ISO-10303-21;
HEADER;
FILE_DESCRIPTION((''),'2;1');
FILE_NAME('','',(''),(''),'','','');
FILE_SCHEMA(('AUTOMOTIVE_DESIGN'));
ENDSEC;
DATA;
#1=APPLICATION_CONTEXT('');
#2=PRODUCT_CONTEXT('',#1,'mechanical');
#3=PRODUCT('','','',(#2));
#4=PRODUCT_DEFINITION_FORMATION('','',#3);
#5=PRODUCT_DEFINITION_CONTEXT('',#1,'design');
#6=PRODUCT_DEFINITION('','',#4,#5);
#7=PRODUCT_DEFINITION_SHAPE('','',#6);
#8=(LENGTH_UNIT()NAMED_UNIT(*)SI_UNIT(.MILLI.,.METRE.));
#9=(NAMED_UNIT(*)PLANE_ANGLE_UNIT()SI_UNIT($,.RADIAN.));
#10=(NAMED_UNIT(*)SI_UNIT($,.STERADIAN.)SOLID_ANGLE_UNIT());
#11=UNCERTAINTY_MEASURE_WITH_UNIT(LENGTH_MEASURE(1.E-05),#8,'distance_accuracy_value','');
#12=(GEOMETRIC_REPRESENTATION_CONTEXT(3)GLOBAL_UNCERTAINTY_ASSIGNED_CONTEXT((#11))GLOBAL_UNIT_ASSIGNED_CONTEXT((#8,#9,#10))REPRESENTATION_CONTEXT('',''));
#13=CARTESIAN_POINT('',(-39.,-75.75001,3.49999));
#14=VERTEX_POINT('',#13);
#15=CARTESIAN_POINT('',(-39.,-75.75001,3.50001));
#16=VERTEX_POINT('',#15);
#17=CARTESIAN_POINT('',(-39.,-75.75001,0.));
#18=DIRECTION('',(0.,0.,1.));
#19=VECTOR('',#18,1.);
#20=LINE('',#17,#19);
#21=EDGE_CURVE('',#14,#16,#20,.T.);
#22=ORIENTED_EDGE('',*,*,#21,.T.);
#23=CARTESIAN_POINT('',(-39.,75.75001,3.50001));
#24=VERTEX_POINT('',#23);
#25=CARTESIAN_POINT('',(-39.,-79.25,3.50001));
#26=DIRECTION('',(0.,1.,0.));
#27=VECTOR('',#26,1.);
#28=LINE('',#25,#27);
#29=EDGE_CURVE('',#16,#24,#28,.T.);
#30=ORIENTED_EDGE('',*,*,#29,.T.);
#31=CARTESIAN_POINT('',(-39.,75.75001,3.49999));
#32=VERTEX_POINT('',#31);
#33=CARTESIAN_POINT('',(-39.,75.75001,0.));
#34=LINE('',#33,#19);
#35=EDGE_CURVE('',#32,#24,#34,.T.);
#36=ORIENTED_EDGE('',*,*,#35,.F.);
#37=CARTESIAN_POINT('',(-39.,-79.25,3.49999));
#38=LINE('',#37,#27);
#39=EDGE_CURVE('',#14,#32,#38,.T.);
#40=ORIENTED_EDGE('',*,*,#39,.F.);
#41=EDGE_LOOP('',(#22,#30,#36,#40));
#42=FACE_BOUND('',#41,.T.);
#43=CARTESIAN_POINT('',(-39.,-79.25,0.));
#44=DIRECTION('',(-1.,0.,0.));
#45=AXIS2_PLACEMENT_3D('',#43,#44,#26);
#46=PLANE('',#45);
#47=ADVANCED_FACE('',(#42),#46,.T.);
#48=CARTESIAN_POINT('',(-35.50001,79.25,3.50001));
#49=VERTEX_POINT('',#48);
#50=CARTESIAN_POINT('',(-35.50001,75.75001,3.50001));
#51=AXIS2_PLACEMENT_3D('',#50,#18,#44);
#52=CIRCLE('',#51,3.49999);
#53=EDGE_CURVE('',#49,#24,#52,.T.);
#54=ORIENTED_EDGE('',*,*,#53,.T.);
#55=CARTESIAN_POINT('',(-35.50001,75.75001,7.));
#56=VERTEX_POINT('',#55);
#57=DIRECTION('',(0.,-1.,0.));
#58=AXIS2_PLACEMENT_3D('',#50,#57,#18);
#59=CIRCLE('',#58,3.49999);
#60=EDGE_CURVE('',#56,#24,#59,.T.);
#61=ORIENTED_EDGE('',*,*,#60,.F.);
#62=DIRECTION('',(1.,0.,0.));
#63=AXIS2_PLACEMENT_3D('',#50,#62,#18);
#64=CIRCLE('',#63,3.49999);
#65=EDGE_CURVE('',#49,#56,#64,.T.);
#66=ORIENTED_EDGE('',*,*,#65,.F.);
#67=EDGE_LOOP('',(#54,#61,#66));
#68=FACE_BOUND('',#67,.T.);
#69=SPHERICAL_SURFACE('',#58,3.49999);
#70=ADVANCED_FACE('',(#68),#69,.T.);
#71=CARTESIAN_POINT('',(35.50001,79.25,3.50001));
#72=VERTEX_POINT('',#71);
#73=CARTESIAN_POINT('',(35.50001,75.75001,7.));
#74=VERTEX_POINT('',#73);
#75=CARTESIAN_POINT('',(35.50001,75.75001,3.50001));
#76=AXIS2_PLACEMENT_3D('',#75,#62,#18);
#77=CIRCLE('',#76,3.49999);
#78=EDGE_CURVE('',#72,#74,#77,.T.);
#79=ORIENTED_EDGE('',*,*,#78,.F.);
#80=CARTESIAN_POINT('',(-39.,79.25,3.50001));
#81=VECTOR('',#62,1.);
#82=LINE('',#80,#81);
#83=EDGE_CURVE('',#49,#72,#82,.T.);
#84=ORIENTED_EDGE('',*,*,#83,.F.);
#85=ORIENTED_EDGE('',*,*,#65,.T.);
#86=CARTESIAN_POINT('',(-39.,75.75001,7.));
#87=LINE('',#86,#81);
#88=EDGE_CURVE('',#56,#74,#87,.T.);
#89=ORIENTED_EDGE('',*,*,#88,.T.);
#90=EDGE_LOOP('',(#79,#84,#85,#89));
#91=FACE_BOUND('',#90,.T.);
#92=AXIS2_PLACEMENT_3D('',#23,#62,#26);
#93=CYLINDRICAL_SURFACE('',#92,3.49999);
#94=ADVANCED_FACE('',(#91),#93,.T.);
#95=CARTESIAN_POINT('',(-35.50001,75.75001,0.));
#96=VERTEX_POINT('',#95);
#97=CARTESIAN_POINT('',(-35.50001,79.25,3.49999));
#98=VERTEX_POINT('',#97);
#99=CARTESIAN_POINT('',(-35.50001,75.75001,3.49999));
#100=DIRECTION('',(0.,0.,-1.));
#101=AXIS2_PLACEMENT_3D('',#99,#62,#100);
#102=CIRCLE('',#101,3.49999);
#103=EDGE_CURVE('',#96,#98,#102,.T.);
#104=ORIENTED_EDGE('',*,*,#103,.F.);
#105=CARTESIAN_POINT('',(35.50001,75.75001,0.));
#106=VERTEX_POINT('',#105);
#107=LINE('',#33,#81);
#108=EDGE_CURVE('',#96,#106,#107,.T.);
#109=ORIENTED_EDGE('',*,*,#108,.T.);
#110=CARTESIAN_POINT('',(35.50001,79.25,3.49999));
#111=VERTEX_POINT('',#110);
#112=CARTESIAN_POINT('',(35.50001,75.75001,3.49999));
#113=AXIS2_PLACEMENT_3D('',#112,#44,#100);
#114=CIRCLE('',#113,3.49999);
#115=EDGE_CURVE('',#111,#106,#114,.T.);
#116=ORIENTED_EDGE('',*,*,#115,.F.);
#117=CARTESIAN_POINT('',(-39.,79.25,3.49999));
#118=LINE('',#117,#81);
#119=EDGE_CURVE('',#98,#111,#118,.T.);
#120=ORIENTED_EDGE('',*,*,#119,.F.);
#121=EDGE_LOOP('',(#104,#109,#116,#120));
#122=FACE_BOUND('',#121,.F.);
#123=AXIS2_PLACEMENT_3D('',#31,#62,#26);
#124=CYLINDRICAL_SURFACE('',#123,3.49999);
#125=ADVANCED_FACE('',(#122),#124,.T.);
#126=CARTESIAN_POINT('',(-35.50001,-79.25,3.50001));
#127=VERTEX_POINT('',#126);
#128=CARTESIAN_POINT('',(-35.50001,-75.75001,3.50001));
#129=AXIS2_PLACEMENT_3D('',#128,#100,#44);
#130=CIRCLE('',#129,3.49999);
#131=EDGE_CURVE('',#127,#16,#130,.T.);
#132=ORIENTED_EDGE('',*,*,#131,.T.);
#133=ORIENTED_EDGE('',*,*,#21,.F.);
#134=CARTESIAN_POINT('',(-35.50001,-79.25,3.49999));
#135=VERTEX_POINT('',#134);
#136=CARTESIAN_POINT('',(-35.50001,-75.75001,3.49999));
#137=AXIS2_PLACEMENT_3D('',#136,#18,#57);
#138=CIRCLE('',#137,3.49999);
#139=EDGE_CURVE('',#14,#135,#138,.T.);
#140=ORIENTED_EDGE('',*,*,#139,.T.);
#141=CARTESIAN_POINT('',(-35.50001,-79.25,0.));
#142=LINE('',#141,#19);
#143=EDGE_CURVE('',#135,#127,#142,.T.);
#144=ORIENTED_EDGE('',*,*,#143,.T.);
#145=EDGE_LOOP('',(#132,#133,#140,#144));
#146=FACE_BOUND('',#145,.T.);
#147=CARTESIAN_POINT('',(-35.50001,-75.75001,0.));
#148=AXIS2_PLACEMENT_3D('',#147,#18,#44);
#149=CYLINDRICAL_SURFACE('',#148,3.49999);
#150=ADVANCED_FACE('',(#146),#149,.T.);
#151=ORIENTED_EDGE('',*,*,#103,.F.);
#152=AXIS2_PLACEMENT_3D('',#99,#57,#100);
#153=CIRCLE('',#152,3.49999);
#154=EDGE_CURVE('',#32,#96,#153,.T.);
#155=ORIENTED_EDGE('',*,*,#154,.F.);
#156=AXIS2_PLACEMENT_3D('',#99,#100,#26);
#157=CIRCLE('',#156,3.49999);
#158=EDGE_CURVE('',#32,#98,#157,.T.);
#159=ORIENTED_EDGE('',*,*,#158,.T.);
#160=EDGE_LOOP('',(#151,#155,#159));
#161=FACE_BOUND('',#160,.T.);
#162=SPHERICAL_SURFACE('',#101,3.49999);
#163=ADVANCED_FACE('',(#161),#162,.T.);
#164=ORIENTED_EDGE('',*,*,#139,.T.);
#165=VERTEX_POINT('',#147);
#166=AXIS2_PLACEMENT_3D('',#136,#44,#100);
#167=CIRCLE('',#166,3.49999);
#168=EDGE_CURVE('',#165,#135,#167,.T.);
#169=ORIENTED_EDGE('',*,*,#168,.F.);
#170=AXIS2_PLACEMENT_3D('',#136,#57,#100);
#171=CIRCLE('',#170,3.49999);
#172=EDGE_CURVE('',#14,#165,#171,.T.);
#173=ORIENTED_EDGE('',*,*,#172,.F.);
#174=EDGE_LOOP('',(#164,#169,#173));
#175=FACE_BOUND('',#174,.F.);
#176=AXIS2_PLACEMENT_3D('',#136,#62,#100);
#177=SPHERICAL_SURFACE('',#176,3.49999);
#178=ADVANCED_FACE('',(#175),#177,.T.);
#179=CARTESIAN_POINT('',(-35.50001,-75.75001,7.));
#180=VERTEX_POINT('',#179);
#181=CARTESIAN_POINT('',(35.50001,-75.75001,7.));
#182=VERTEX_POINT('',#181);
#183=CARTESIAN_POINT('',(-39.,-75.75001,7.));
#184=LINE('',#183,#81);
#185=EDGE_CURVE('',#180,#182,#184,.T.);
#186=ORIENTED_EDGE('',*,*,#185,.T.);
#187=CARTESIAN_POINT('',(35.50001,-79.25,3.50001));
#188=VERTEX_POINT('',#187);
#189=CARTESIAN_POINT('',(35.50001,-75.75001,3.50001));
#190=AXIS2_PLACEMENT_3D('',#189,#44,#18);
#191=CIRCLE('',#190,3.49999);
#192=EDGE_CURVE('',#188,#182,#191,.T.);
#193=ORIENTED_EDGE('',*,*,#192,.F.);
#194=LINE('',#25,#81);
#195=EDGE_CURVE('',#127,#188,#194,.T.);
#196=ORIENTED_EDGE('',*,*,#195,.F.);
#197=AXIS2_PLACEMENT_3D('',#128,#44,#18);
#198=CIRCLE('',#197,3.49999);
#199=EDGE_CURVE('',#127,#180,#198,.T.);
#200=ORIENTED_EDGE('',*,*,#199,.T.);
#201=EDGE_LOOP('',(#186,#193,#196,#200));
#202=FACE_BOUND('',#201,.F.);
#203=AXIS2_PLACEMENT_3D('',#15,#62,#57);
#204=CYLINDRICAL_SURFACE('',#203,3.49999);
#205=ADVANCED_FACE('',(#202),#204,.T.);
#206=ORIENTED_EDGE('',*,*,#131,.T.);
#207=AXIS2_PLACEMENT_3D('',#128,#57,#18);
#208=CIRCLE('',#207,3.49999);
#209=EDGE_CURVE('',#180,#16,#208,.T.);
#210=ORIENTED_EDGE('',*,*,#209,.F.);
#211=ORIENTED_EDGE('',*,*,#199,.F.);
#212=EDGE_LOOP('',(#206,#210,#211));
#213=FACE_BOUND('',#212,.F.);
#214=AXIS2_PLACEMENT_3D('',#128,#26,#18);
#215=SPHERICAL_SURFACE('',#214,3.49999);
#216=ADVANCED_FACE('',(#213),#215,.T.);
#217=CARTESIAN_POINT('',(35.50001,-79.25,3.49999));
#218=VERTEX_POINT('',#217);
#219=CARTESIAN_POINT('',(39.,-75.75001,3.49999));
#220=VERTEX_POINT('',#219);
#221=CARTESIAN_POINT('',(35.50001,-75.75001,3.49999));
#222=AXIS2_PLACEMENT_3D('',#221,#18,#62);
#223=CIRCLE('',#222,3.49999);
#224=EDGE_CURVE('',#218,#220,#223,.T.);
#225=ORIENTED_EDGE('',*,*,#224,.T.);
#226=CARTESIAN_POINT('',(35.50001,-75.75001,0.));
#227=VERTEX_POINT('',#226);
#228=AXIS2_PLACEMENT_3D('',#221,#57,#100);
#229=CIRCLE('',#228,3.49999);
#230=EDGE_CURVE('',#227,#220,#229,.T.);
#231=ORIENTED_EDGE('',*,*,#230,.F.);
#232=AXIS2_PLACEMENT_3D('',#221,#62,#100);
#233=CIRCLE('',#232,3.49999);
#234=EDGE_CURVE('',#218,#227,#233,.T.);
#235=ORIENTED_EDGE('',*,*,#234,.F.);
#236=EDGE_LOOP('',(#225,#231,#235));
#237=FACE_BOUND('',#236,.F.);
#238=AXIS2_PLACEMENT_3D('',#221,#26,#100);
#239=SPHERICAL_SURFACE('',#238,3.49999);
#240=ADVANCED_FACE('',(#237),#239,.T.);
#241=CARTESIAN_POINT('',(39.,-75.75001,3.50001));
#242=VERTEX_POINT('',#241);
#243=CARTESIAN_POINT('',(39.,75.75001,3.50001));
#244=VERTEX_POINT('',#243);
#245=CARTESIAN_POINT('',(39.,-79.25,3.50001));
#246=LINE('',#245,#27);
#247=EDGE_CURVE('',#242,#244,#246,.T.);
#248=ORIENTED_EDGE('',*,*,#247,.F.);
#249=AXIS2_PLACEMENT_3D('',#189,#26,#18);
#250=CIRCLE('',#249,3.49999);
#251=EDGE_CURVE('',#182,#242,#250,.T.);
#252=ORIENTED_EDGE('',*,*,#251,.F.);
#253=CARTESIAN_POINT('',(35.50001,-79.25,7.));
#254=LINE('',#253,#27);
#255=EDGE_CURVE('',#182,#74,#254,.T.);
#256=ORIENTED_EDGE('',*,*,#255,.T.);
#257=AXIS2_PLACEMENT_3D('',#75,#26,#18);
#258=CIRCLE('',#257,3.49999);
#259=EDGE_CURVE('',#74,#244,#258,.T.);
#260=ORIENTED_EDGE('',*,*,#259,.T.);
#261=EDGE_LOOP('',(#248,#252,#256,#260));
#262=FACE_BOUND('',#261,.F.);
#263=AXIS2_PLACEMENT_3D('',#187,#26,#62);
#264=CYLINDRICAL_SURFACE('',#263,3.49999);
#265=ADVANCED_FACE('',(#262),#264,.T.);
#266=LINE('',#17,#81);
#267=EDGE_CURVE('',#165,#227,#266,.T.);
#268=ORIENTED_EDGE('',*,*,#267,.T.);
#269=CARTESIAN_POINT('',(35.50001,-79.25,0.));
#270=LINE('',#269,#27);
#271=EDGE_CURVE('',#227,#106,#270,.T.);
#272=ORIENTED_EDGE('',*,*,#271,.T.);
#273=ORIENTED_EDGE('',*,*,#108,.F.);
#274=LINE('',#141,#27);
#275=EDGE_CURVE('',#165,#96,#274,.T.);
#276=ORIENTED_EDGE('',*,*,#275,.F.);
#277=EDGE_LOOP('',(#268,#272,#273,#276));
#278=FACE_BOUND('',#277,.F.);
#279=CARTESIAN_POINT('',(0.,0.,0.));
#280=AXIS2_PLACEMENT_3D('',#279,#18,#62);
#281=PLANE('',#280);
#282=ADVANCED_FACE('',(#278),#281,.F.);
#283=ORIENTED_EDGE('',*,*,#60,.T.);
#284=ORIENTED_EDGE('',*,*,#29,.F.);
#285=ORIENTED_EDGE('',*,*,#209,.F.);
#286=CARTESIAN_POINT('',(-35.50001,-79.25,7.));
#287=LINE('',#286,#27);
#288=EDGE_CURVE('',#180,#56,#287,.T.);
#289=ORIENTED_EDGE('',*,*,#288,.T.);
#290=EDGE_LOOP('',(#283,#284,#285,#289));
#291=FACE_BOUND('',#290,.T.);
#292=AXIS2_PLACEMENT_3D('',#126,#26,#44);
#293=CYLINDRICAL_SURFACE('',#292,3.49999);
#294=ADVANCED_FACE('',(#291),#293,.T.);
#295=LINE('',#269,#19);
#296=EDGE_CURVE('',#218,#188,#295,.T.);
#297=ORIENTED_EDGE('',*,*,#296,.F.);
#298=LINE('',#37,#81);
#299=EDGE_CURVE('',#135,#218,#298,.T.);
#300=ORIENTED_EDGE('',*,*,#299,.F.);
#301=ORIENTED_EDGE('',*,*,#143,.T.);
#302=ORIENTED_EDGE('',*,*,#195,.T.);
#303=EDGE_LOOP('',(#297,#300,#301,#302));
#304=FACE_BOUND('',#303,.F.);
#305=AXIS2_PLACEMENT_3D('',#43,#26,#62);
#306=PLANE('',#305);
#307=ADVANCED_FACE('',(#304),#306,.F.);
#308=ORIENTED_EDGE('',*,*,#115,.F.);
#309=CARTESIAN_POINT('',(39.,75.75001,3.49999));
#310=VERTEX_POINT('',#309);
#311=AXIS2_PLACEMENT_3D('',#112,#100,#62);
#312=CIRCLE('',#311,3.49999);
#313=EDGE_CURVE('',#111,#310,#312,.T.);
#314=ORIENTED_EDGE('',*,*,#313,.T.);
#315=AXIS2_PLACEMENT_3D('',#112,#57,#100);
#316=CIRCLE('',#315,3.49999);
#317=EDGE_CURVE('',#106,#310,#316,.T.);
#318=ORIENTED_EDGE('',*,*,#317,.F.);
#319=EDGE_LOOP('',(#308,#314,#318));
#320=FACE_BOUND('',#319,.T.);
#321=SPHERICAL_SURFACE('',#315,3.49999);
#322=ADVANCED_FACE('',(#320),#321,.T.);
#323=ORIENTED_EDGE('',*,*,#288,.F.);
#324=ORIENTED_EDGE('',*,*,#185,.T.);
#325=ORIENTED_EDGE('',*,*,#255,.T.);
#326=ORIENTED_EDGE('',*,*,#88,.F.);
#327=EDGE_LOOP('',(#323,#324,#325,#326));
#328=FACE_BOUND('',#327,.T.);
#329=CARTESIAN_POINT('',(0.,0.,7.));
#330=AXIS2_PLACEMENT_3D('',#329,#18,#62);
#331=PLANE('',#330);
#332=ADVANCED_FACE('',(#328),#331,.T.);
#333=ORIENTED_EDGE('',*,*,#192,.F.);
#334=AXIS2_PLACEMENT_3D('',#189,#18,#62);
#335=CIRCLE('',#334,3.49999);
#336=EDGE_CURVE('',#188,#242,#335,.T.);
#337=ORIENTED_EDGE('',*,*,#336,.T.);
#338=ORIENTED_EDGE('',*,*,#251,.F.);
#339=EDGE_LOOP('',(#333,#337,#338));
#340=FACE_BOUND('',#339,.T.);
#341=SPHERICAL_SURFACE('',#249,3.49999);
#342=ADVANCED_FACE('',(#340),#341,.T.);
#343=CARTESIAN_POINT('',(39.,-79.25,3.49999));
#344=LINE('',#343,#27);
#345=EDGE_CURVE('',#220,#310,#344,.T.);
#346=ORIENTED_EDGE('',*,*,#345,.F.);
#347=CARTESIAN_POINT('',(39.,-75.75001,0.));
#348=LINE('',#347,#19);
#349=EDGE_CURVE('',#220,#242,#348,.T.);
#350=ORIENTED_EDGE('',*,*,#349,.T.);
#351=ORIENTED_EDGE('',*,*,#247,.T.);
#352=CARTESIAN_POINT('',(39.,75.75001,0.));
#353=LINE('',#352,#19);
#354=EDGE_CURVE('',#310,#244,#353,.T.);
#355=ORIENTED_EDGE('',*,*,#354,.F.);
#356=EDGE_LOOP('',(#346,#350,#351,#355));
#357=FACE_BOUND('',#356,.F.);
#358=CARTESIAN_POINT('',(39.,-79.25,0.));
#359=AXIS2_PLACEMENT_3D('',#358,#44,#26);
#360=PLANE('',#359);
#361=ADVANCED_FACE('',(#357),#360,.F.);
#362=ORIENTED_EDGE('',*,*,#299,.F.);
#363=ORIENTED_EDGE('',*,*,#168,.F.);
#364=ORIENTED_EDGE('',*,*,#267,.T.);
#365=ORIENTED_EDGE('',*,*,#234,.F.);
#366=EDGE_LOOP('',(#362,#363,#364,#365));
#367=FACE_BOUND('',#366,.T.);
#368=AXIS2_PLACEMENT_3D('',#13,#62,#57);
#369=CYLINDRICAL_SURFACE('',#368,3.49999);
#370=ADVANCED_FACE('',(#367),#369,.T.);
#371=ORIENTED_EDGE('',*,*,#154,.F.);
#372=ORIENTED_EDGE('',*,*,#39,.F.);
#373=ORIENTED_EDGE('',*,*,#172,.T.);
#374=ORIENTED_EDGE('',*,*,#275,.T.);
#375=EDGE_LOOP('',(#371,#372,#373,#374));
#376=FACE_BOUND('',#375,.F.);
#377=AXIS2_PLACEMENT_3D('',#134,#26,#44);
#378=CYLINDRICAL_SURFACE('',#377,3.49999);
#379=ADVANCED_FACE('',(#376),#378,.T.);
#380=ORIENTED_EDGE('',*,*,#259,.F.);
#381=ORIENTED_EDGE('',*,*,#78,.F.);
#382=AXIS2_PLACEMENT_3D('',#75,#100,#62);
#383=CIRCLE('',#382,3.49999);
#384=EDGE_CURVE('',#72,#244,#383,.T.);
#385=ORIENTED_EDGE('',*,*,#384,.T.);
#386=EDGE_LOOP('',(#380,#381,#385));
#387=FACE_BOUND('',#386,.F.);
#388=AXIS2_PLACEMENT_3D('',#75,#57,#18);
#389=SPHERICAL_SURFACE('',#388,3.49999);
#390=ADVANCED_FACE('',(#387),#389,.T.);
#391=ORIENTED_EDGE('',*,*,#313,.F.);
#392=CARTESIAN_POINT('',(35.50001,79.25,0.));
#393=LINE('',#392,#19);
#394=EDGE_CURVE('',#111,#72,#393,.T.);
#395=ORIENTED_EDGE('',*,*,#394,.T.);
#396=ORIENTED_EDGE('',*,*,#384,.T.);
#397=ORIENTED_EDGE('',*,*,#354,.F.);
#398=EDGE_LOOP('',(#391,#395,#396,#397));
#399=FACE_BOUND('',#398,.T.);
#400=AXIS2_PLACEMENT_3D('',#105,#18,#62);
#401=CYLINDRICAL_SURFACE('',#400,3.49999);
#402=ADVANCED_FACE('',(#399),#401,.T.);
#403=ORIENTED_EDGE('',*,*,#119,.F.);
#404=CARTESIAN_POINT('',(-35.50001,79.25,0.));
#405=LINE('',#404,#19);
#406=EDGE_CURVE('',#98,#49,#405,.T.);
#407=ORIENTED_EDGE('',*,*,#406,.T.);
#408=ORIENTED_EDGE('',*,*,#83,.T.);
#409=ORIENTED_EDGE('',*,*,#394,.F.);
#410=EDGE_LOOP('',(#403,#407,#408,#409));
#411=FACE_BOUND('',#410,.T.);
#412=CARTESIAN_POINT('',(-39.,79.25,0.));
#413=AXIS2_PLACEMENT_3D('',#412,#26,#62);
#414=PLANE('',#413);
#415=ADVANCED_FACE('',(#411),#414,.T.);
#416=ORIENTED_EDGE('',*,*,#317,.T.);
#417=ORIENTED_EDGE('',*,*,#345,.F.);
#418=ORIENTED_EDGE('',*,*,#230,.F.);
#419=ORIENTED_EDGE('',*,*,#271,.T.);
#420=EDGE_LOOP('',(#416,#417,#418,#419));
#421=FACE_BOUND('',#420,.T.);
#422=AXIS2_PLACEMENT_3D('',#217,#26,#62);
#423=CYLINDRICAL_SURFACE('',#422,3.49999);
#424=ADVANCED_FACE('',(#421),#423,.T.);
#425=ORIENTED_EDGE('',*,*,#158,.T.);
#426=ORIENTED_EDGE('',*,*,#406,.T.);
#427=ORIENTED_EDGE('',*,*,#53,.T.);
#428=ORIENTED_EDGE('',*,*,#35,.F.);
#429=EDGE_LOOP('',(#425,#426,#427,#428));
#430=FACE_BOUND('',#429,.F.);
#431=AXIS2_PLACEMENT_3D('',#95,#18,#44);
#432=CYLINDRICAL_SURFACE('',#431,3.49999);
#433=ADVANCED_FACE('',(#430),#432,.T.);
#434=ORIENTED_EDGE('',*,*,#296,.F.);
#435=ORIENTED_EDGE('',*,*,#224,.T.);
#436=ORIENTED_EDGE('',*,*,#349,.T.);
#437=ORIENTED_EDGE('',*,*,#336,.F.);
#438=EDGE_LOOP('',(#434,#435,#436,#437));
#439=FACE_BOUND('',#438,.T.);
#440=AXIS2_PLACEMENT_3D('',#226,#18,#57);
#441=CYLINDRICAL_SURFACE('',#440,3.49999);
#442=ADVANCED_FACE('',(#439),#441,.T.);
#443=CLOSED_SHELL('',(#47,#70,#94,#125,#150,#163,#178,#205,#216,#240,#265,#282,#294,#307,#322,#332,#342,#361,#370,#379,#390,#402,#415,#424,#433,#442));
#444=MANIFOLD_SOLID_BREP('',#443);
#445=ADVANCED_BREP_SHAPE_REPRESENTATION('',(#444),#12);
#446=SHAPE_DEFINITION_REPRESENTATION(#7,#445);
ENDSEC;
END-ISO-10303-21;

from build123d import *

# Parameters (mm, degrees)
F0_W     = 78
F0_H     = 158.5
F0_R     = 5.75
F0_R_2   = 0.75
F0_W_2   = 14
F0_H_2   = 1
F0_W_3   = 22
F0_H_3   = 12
F1_DEPTH = 7
F2_R     = 3.49999


# Not quite as in the source:
# - a fillet or chamfer is up to 0.001 mm smaller than in the source, because OpenCascade refuses the exact size


with BuildPart() as f1:
    # F0 (on Top) → F1 (new body)
    with BuildSketch(Plane.XY):
        Rectangle(F0_W, F0_H)
        with Locations((0, -69.5)):
            Circle(F0_R, mode=Mode.SUBTRACT)
        with Locations((-13.75, 69.75)):
            Circle(F0_R_2, mode=Mode.SUBTRACT)
        with Locations((0, 69.75)):
            Rectangle(F0_W_2, F0_H_2, mode=Mode.SUBTRACT)
        with Locations((22.5, 67.75)):
            Rectangle(F0_W_3, F0_H_3, mode=Mode.SUBTRACT)
        with Locations((0, -69.5)):
            Circle(F0_R)
        with Locations((22.5, 67.75)):
            Rectangle(F0_W_3, F0_H_3)
        with Locations((0, 69.75)):
            Rectangle(F0_W_2, F0_H_2)
        with Locations((-13.75, 69.75)):
            Circle(F0_R_2)
    extrude(amount=F1_DEPTH)

    # F2 (radius 3.5 in the source; OpenCascade refuses exactly that, so slightly less here)
    f2_edges = [f1.edges().sort_by_distance(p)[0] for p in [
        (39, 0, 7),
        (-39, 0, 7),
        (0, -79.25, 7),
        (0, 79.25, 7),
        (39, 0, 0),
        (0, -79.25, 0),
        (0, 79.25, 0),
        (-39, 0, 0),
        (-39, 79.25, 3.5),
        (39, 79.25, 3.5),
        (-39, -79.25, 3.5),
        (39, -79.25, 3.5),
    ]]
    fillet(f2_edges, radius=F2_R)


solid = f1.part
